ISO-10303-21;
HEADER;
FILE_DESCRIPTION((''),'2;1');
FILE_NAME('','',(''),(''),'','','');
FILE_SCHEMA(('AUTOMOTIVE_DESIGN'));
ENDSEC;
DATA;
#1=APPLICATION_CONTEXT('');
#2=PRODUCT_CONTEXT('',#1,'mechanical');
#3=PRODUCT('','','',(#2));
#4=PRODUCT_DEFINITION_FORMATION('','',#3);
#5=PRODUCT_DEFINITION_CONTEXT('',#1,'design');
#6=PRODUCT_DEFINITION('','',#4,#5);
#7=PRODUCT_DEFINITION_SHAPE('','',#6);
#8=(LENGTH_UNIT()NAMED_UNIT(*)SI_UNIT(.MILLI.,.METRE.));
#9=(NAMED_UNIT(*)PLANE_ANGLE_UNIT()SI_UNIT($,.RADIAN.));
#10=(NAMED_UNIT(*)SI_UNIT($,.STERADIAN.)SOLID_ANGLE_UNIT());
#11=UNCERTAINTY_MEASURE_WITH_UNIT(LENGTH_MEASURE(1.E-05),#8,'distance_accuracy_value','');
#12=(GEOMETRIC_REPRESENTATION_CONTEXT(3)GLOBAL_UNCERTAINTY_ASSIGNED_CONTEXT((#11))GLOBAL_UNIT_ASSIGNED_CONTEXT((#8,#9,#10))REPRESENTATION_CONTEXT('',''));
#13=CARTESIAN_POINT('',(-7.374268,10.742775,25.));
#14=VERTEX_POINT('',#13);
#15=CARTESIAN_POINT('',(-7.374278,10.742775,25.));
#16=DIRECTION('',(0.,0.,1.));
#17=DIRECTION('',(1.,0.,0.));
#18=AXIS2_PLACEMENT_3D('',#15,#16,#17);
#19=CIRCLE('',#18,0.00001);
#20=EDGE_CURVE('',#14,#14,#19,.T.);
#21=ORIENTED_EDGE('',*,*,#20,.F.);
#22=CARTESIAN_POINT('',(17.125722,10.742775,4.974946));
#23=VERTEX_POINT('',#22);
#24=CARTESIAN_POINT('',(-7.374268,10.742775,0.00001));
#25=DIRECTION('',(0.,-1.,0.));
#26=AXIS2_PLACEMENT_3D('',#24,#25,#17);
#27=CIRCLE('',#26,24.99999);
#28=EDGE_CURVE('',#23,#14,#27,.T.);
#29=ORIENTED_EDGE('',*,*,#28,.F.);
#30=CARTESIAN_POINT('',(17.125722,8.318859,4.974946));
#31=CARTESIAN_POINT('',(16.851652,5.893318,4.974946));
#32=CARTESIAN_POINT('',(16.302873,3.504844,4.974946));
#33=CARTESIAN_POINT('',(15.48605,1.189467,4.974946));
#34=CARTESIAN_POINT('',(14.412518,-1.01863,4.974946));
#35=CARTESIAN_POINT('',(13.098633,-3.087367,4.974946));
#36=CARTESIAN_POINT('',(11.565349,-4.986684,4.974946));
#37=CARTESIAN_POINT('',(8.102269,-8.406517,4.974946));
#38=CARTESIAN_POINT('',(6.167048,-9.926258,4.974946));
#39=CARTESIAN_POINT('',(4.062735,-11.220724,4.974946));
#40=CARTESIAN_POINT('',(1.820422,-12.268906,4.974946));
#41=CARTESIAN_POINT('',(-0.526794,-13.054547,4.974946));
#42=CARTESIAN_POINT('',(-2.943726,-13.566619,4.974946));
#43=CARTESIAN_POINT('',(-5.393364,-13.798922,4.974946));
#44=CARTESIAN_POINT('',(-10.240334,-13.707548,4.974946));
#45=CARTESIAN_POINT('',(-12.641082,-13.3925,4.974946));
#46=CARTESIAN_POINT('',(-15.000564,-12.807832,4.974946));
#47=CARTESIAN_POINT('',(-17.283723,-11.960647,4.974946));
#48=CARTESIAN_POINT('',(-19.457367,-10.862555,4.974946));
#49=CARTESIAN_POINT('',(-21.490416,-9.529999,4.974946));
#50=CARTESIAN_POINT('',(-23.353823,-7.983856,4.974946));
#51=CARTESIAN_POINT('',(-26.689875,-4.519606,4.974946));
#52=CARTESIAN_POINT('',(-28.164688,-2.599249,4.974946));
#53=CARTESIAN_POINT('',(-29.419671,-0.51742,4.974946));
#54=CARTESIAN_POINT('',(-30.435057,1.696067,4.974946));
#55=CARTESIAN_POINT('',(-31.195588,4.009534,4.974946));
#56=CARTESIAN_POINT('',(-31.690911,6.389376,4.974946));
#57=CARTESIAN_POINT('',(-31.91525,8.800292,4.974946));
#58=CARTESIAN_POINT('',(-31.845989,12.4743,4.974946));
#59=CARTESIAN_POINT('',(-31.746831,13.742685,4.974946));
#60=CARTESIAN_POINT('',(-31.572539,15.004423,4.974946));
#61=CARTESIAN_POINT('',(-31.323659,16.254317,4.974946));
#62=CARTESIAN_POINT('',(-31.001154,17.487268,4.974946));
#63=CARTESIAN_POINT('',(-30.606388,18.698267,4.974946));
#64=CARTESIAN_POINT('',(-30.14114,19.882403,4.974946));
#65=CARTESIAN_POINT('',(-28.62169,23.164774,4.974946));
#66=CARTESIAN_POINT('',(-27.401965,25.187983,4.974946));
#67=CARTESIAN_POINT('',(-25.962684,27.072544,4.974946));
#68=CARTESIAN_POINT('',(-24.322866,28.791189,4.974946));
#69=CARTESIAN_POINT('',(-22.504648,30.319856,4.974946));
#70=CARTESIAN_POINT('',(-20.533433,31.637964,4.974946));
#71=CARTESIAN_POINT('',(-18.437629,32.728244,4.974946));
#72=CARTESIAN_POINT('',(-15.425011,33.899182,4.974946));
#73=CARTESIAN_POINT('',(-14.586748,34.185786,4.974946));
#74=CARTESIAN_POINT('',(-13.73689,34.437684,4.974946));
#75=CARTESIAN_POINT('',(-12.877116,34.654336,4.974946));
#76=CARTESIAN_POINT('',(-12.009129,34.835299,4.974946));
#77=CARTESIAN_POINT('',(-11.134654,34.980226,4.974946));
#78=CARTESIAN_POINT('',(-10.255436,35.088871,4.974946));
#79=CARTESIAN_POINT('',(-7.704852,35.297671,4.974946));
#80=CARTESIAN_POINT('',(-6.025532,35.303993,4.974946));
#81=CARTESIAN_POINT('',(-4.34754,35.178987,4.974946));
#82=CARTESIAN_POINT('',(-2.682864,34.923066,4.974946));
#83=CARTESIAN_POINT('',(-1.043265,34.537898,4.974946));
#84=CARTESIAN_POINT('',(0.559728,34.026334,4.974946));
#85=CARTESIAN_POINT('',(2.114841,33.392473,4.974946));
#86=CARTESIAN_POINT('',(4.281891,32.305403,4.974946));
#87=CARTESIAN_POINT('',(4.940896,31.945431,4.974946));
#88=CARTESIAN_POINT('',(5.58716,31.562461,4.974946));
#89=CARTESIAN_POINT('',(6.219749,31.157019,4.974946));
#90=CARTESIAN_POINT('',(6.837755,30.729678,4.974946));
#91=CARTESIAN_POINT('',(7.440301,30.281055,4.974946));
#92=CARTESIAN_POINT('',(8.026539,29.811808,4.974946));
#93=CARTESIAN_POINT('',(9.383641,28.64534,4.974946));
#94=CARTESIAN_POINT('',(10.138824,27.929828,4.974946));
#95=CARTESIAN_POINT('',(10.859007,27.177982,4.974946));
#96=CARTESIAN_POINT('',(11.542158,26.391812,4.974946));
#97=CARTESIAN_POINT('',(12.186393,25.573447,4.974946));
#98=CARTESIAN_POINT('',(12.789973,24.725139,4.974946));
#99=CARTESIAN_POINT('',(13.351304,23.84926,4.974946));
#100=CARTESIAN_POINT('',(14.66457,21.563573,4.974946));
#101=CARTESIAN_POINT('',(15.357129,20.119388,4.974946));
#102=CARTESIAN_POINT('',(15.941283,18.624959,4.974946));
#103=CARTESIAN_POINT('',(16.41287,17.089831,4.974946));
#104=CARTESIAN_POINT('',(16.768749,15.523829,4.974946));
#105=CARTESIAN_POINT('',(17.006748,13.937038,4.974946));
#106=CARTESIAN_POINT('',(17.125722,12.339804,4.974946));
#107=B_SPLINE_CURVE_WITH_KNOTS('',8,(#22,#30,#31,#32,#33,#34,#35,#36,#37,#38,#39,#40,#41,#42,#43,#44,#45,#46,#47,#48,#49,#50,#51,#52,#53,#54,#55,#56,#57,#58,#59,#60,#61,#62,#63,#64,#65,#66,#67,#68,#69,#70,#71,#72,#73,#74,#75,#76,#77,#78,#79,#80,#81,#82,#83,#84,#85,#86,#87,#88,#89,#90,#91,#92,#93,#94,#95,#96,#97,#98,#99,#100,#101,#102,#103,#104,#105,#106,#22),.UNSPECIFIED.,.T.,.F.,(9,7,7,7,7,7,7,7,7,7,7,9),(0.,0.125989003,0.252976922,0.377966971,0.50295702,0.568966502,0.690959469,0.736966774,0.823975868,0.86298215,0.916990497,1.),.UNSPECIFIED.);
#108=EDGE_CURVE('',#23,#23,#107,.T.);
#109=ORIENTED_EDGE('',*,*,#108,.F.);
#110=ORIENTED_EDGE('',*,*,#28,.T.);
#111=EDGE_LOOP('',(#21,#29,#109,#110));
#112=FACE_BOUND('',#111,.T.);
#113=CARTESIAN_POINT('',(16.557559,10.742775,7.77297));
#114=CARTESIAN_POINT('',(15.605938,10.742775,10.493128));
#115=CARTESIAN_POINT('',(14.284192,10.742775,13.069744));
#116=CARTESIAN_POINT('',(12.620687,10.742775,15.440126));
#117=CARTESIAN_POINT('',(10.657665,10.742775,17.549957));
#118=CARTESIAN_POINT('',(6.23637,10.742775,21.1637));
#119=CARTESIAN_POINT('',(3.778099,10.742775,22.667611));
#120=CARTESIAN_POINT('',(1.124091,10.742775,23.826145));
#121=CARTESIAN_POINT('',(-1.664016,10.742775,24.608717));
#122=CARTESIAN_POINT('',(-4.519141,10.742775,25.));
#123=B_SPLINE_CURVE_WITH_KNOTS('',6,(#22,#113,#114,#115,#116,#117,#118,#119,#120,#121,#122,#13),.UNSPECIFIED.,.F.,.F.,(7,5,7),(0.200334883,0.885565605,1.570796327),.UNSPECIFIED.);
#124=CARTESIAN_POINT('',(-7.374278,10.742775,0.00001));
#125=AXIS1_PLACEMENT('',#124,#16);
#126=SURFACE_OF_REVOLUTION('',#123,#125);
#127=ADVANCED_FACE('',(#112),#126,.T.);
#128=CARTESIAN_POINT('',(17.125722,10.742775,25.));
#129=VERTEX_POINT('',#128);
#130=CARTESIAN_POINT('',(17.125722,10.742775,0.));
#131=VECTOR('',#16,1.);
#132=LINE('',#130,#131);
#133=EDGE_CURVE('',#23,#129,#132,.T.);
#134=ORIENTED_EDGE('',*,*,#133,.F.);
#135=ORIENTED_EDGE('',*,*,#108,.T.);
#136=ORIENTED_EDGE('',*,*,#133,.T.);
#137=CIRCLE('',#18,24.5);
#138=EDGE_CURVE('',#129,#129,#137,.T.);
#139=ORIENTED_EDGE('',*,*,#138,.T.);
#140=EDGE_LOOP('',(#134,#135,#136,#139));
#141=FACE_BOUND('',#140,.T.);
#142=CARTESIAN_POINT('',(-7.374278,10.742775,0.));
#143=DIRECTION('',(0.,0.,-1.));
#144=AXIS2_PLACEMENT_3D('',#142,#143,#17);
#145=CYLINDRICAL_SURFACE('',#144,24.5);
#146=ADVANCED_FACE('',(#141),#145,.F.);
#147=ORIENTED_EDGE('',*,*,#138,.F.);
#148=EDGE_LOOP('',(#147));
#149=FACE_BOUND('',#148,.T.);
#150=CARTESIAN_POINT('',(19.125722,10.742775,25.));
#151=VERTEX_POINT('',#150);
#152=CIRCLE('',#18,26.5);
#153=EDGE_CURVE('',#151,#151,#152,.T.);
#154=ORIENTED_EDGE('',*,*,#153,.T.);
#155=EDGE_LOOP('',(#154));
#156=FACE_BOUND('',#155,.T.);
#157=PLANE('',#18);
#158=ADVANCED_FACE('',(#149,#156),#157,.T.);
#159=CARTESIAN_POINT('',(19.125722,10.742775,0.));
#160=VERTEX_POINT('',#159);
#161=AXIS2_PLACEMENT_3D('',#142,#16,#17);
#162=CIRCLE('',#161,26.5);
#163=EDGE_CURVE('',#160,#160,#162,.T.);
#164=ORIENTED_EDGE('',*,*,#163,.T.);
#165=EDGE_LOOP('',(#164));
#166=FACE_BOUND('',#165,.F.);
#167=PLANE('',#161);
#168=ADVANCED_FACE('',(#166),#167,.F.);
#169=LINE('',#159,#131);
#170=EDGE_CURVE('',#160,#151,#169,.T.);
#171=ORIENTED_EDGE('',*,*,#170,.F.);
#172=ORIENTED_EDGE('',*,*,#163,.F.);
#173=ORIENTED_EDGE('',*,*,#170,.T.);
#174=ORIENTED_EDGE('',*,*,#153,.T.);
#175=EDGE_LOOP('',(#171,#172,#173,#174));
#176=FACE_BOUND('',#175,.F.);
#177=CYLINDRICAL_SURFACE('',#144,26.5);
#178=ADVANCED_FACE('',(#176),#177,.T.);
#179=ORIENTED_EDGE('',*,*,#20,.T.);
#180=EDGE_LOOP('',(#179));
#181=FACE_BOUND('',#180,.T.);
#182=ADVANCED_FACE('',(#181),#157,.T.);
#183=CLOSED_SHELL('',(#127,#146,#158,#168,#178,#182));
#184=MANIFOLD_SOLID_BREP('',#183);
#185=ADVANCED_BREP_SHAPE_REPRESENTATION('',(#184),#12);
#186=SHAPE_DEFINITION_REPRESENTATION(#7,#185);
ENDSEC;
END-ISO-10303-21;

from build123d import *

# Parameters (mm, degrees)
F0_R     = 25
F1_DEPTH = 25
F2_R     = 24.99999
F3_R     = 26.5
F3_R_2   = 24.5
F4_DEPTH = 25


# Not quite as in the source:
# - a fillet or chamfer is up to 0.001 mm smaller than in the source, because OpenCascade refuses the exact size


with BuildPart() as f1:
    # F0 (on Top) → F1 (new body)
    with BuildSketch(Plane.XY):
        with Locations((-7.374277804, 10.7427751645)):
            Circle(F0_R)
    extrude(amount=F1_DEPTH)

    # F2 (radius 25 in the source; OpenCascade refuses exactly that, so slightly less here)
    f2_edges = [f1.edges().sort_by_distance(p)[0] for p in [
        (-32.374278, 10.742775, 25),
    ]]
    fillet(f2_edges, radius=F2_R)

    # F3 (on Top) → F4 (join)
    with BuildSketch(Plane.XY):
        with Locations((-7.374277804, 10.7427751645)):
            Circle(F3_R)
        with Locations((-7.374277804, 10.7427751645)):
            Circle(F3_R_2, mode=Mode.SUBTRACT)
    extrude(amount=F4_DEPTH)


solid = f1.part
